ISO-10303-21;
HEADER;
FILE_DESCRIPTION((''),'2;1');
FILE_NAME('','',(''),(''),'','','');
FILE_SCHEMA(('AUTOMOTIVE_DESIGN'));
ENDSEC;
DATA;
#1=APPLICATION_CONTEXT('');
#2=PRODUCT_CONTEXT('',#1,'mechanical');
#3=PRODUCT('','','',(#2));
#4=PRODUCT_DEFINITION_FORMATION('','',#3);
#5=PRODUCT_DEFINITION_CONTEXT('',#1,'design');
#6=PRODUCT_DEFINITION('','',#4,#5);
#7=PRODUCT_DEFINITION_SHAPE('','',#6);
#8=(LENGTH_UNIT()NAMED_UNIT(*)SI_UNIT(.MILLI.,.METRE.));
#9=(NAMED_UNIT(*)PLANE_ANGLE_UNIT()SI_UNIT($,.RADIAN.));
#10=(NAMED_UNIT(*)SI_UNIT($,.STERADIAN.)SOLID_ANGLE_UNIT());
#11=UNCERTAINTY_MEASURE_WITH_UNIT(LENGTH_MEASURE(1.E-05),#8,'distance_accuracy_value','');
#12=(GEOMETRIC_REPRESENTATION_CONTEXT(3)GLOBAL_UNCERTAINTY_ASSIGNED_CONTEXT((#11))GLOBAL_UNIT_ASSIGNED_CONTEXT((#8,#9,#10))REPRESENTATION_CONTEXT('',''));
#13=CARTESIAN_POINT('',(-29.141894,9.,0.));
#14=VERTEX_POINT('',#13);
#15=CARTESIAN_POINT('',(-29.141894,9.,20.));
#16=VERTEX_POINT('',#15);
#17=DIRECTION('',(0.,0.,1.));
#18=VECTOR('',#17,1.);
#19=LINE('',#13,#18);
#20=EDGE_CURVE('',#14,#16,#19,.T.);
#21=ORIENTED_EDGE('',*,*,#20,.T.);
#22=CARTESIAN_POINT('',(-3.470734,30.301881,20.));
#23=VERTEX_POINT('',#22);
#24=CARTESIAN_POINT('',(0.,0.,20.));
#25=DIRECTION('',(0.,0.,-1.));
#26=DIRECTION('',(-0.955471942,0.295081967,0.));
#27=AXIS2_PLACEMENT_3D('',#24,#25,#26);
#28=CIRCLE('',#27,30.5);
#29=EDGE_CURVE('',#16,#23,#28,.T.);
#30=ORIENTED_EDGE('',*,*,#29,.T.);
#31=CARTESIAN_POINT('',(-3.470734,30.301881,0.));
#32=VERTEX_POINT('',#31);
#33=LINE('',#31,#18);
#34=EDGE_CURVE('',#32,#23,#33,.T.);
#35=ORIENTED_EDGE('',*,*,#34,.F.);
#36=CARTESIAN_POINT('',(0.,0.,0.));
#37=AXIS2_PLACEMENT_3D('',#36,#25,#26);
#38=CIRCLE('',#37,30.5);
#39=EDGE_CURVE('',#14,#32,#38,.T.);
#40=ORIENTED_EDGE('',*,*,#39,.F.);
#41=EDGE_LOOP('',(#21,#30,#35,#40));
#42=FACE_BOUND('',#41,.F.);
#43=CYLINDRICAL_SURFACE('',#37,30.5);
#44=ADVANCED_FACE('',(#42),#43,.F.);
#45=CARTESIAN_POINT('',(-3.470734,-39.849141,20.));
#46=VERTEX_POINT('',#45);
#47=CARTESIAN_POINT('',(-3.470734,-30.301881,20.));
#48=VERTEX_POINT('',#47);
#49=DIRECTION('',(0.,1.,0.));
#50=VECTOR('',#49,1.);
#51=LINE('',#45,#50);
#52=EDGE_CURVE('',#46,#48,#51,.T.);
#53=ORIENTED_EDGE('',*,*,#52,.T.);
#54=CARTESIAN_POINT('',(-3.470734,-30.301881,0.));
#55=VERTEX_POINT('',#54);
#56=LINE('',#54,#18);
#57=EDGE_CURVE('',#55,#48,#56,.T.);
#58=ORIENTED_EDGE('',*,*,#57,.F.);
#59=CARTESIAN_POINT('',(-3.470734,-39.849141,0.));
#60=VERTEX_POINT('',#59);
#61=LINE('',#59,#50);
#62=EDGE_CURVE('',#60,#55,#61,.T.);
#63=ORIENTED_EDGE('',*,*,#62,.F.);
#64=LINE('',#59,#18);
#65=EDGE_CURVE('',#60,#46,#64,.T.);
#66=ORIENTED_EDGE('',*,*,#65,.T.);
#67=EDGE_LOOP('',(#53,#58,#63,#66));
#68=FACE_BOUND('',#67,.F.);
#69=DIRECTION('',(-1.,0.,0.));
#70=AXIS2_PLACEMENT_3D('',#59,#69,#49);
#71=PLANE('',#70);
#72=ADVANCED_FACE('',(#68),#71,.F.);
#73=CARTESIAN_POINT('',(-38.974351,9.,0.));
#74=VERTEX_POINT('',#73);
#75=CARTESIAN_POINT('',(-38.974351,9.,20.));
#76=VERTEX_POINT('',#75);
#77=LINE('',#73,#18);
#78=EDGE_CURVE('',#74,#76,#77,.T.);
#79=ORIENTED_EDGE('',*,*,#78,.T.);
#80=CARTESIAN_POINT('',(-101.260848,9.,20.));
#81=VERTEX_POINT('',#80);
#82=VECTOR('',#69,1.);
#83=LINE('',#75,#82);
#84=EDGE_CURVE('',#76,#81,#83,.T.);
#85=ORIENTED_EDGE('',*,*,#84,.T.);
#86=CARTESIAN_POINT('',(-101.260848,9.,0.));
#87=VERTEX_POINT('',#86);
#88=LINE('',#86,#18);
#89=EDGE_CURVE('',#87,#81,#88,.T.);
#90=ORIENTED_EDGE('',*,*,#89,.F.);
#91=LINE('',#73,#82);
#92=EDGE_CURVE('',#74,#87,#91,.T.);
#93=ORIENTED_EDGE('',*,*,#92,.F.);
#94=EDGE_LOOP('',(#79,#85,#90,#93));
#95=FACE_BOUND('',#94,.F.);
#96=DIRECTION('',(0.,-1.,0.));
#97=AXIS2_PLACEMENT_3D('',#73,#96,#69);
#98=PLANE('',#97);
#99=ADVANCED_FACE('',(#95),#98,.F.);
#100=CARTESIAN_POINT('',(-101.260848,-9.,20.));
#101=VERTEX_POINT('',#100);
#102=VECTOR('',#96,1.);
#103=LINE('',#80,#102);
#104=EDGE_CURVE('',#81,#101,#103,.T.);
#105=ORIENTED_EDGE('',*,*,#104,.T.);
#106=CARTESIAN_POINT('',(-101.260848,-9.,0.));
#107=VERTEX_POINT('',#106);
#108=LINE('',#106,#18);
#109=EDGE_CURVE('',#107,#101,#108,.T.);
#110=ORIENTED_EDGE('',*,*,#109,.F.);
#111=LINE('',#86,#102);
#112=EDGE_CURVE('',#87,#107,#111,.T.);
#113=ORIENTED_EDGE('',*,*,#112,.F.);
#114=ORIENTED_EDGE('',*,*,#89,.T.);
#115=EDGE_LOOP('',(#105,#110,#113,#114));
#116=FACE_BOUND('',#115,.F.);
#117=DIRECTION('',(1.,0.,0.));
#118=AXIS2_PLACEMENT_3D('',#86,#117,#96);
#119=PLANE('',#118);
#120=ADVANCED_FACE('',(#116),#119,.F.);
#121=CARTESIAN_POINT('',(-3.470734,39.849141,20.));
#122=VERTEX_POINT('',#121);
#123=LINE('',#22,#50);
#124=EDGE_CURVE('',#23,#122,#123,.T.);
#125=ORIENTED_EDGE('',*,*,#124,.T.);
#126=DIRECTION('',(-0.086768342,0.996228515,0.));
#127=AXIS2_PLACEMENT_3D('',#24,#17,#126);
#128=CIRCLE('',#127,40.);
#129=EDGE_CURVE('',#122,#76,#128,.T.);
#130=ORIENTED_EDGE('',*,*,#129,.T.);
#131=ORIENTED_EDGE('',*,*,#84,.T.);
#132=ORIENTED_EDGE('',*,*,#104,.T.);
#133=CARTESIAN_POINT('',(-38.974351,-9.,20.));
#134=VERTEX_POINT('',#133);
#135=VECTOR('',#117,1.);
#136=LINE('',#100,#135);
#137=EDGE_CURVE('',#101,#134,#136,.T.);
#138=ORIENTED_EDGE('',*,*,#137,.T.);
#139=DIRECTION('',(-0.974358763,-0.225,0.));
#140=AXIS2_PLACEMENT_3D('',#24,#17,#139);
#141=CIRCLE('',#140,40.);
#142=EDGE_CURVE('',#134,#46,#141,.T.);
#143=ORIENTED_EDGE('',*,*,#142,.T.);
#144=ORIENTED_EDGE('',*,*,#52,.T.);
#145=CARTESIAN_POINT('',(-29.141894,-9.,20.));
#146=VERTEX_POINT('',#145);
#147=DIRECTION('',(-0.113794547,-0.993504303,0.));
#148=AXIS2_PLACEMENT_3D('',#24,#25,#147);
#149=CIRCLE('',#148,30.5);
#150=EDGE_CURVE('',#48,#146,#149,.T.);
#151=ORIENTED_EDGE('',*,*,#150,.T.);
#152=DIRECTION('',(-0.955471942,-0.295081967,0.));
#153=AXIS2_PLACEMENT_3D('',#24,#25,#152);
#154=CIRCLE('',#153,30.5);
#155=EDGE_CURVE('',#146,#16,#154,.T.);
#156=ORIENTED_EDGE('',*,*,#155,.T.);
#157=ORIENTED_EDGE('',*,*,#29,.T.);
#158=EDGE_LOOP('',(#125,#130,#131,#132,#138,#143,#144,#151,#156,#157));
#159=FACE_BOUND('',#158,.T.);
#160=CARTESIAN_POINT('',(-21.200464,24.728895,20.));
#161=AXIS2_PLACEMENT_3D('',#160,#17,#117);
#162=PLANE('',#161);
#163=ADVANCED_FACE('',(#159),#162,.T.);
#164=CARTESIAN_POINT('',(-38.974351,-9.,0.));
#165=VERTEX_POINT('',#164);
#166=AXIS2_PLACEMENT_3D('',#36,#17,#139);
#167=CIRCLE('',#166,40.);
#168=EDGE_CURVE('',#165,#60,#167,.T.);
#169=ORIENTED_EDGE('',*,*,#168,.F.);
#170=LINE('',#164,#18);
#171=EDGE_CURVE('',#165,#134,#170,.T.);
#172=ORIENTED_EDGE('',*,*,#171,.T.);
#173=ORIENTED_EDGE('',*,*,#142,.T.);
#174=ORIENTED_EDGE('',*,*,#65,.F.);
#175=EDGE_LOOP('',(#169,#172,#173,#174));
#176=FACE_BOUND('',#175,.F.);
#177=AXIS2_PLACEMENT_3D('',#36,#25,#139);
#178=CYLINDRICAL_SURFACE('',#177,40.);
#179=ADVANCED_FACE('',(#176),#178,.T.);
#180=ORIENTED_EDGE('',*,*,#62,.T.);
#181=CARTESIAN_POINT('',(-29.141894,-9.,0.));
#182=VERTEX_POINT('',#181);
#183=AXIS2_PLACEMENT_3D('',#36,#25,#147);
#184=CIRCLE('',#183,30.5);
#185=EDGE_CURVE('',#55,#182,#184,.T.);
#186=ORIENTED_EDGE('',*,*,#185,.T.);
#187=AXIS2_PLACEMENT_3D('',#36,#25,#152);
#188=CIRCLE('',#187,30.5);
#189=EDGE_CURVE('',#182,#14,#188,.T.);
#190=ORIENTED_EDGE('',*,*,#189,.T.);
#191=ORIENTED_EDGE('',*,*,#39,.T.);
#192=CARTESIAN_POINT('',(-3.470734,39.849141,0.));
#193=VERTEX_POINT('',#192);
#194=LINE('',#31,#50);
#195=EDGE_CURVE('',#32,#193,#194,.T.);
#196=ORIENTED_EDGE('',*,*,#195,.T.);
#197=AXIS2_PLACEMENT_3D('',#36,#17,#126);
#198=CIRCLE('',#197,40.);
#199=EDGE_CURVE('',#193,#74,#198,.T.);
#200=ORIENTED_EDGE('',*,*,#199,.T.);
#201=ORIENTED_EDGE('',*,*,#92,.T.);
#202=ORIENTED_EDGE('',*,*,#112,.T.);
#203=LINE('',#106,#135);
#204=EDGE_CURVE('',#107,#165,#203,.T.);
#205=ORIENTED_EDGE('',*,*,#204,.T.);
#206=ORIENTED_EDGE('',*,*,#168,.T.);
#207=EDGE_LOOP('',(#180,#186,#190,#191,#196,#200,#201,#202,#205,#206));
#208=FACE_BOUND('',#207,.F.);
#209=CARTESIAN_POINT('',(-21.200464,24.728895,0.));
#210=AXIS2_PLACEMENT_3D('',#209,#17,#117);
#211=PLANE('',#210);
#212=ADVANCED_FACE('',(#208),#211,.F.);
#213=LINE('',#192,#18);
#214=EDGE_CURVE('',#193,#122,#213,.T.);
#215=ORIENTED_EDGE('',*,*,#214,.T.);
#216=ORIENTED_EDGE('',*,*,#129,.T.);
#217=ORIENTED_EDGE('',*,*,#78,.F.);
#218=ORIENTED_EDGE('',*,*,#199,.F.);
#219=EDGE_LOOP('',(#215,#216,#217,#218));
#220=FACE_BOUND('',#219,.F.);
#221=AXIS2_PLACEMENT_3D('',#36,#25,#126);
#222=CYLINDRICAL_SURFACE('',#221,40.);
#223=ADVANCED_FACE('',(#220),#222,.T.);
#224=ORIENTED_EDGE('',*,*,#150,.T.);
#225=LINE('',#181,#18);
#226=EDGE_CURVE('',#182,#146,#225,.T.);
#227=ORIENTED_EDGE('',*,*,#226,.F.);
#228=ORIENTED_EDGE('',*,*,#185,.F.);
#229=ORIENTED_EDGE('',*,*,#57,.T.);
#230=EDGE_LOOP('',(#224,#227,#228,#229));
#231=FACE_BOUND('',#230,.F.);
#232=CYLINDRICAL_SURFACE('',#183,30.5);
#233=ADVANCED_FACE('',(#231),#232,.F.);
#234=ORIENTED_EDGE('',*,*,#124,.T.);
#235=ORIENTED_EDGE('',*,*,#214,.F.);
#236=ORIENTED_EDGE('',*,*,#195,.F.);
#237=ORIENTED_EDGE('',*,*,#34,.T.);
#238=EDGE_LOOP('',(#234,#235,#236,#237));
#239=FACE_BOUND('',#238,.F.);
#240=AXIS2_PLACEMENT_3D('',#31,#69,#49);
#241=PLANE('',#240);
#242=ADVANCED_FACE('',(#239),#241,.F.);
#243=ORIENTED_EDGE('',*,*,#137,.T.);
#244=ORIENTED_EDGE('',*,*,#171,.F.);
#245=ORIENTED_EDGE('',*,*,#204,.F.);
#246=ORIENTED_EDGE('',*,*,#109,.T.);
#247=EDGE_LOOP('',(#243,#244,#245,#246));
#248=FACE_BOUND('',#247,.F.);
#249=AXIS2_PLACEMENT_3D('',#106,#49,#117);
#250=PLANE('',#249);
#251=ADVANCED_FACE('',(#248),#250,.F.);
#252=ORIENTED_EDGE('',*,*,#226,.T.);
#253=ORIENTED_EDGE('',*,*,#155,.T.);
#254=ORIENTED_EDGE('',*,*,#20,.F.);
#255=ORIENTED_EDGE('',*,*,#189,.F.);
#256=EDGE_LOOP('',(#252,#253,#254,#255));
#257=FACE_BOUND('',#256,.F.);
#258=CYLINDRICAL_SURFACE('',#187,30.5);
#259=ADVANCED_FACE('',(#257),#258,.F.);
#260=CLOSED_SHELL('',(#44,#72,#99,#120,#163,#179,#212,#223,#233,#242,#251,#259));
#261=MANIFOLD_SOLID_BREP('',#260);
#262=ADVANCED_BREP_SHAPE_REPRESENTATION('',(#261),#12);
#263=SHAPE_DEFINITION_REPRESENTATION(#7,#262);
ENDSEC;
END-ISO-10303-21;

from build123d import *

# Parameters (mm, degrees)
F1_DEPTH = 20


# Not quite as in the source:
# - a feature names something its author has since deleted; it is built from what else it names


with BuildPart() as f1:
    # F0 (on Top) → F1 (new body)
    with BuildSketch(Plane.XY):
        with BuildLine():
            ThreePointArc((-29.1418942418, 9), (-19.4766119099, 23.471505885), (-3.470733695, 30.3018812554))
            Line((-3.470733695, 30.3018812554), (-3.470733695, 39.8491406133))
            ThreePointArc((-3.470733695, 39.8491406133), (-26.2357325621, 30.1941440834), (-38.9743505398, 9))
            Line((-38.9743505398, 9), (-29.1418942418, 9))
        make_face()
        with BuildLine():
            ThreePointArc((-29.1418942418, -9), (-30.5, 0), (-29.1418942418, 9))
            Line((-29.1418942418, 9), (-38.9743505398, 9))
            ThreePointArc((-38.9743505398, 9), (-40, 0), (-38.9743505398, -9))
            Line((-38.9743505398, -9), (-29.1418942418, -9))
        make_face()
        with BuildLine():
            ThreePointArc((-3.470733695, -30.3018812554), (-19.4766119099, -23.471505885), (-29.1418942418, -9))
            Line((-29.1418942418, -9), (-38.9743505398, -9))
            ThreePointArc((-38.9743505398, -9), (-26.2357325621, -30.1941440834), (-3.470733695, -39.8491406133))
            Line((-3.470733695, -39.8491406133), (-3.470733695, -30.3018812554))
        make_face()
        with BuildLine():
            ThreePointArc((-38.9743505398, -9), (-40, 0), (-38.9743505398, 9))
            Line((-38.9743505398, 9), (-101.2608483434, 9))
            Line((-101.2608483434, 9), (-101.2608483434, -9))
            Line((-101.2608483434, -9), (-38.9743505398, -9))
        make_face()
    extrude(amount=F1_DEPTH)


solid = f1.part
